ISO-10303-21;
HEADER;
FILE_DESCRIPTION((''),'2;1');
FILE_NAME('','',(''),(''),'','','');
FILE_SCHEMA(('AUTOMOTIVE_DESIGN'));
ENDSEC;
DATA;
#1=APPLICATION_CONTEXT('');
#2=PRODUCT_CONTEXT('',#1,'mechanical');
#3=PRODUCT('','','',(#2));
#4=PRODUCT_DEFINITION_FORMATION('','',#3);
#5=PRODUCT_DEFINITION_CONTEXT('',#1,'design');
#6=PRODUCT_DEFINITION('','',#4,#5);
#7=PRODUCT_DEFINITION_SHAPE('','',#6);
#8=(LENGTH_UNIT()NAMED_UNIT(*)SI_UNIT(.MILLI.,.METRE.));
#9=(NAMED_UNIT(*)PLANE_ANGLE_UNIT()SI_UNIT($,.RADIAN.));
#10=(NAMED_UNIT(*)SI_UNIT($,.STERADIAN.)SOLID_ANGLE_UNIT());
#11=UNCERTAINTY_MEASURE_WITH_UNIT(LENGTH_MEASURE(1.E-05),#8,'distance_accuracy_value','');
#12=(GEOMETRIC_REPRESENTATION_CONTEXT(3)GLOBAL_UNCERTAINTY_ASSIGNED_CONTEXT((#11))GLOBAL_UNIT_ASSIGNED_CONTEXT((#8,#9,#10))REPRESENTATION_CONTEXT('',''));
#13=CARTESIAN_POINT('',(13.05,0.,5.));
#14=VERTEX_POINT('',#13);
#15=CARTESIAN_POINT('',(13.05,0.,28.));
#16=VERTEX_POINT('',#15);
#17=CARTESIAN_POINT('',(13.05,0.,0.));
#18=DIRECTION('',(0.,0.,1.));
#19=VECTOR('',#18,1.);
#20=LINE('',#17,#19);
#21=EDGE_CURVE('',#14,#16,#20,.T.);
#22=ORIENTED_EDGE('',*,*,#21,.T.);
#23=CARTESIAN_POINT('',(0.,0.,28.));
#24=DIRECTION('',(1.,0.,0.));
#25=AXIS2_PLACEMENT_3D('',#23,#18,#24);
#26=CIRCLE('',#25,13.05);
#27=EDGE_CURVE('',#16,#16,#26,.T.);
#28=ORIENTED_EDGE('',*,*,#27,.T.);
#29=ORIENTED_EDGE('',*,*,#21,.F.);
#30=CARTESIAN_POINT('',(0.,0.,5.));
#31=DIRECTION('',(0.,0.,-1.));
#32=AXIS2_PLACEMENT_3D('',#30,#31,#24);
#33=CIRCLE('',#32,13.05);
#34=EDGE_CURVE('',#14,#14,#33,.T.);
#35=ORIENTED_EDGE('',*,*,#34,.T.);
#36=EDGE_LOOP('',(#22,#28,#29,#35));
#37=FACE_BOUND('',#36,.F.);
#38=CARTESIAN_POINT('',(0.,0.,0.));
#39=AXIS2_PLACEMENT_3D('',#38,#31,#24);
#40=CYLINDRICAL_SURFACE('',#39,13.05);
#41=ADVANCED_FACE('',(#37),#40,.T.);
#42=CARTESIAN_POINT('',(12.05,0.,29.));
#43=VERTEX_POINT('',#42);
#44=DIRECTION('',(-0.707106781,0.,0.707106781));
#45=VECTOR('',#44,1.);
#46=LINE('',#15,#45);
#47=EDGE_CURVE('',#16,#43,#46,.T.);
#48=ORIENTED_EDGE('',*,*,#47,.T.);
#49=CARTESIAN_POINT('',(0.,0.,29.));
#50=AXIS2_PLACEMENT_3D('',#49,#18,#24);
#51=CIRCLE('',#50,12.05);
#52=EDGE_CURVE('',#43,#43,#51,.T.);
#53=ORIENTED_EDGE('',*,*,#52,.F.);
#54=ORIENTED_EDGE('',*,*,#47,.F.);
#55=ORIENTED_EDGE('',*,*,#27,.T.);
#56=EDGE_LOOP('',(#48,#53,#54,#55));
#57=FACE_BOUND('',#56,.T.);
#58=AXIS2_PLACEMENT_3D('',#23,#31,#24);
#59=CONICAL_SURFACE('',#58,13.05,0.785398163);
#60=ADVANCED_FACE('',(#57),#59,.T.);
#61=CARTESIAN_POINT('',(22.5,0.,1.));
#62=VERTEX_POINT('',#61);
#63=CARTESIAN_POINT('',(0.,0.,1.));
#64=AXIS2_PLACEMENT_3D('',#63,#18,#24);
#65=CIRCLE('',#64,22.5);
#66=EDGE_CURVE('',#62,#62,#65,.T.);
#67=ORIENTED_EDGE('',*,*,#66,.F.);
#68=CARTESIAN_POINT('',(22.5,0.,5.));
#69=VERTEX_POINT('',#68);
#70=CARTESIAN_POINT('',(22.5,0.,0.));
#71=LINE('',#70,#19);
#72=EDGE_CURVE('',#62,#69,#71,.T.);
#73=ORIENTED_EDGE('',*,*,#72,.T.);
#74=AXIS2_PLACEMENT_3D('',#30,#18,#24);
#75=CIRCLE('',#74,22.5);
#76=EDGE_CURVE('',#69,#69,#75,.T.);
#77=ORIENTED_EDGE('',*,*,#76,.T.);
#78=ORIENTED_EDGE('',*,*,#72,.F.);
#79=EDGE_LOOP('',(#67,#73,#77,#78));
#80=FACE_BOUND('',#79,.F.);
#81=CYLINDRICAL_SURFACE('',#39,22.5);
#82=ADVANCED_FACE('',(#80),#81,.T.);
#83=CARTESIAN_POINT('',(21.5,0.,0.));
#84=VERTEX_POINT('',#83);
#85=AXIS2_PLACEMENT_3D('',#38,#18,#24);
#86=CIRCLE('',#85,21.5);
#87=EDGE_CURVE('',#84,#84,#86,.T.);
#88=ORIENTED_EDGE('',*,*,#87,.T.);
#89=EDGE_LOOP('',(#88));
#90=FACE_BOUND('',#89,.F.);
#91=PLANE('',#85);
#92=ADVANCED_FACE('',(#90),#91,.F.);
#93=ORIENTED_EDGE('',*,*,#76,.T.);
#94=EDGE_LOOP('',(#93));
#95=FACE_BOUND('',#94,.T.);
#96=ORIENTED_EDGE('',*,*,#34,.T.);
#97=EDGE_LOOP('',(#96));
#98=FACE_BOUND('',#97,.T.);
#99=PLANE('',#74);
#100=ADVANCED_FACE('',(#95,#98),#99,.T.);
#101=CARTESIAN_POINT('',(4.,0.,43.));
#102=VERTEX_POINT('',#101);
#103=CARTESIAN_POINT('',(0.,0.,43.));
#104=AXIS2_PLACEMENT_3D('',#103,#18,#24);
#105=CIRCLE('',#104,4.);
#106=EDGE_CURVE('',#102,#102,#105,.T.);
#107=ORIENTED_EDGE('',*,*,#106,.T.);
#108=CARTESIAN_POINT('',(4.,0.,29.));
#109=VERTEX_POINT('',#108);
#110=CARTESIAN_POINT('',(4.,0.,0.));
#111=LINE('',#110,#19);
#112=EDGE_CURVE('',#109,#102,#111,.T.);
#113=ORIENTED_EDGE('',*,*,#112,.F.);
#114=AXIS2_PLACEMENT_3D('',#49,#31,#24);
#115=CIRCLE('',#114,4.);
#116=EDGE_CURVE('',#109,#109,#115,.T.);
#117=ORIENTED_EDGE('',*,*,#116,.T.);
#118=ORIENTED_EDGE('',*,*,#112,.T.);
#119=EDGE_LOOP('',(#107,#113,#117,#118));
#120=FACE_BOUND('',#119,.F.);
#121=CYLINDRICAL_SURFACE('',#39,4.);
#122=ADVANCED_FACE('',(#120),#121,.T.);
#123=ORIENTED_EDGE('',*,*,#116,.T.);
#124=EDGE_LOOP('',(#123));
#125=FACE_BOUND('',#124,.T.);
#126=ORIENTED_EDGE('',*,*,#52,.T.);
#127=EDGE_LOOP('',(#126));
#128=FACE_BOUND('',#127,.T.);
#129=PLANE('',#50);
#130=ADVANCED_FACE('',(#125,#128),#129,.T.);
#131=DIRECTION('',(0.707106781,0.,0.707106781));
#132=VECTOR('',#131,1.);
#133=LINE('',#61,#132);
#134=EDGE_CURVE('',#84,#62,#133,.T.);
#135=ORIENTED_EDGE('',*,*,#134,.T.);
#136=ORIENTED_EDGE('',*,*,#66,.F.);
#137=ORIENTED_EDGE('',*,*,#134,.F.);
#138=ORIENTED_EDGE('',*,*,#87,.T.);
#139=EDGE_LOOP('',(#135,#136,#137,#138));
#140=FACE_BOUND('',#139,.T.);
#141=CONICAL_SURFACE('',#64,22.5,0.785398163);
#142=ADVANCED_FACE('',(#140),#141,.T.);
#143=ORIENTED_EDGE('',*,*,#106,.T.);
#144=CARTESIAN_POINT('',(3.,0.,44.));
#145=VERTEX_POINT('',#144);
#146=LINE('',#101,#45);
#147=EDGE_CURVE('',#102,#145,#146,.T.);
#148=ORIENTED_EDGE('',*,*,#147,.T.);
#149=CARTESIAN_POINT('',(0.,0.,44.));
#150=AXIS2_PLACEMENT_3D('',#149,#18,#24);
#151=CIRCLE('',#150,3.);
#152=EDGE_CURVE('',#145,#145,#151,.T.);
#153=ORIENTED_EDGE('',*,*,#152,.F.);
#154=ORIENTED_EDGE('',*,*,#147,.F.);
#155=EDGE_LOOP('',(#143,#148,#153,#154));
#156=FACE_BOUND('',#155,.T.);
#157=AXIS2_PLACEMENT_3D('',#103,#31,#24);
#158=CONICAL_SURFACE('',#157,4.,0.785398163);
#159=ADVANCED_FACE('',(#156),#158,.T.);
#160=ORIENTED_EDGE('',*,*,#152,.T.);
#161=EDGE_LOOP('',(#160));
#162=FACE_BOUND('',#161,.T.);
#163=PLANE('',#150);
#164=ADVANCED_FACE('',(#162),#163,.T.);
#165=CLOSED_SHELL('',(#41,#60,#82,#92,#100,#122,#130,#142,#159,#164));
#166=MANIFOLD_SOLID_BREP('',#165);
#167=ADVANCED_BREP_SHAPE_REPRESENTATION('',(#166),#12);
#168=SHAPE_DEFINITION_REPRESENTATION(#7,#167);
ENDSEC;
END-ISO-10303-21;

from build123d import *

# Parameters (mm, degrees)
F0_R     = 22.5
F1_DEPTH = 5
F2_R     = 13.05
F3_DEPTH = 29
F4_R     = 4
F5_DEPTH = 44
F6_SIZE  = 1


# Not quite as in the source:
# - a feature names something its author has since deleted; it is built from what else it names


with BuildPart() as f1:
    # F0 (on Top) → F1 (new body)
    with BuildSketch(Plane.XY):
        Circle(F0_R)
    extrude(amount=F1_DEPTH)

    # F2 (on Top) → F3 (join)
    with BuildSketch(Plane.XY):
        Circle(F2_R)
    extrude(amount=F3_DEPTH)

    # F4 (on Top) → F5 (join)
    with BuildSketch(Plane.XY):
        Circle(F4_R)
    extrude(amount=F5_DEPTH)

    # F6
    f6_edges = [f1.edges().sort_by_distance(p)[0] for p in [
        (-22.5, 0, 0),
        (-13.05, 0, 29),
        (-4, 0, 44),
    ]]
    chamfer(f6_edges, length=F6_SIZE)


solid = f1.part
